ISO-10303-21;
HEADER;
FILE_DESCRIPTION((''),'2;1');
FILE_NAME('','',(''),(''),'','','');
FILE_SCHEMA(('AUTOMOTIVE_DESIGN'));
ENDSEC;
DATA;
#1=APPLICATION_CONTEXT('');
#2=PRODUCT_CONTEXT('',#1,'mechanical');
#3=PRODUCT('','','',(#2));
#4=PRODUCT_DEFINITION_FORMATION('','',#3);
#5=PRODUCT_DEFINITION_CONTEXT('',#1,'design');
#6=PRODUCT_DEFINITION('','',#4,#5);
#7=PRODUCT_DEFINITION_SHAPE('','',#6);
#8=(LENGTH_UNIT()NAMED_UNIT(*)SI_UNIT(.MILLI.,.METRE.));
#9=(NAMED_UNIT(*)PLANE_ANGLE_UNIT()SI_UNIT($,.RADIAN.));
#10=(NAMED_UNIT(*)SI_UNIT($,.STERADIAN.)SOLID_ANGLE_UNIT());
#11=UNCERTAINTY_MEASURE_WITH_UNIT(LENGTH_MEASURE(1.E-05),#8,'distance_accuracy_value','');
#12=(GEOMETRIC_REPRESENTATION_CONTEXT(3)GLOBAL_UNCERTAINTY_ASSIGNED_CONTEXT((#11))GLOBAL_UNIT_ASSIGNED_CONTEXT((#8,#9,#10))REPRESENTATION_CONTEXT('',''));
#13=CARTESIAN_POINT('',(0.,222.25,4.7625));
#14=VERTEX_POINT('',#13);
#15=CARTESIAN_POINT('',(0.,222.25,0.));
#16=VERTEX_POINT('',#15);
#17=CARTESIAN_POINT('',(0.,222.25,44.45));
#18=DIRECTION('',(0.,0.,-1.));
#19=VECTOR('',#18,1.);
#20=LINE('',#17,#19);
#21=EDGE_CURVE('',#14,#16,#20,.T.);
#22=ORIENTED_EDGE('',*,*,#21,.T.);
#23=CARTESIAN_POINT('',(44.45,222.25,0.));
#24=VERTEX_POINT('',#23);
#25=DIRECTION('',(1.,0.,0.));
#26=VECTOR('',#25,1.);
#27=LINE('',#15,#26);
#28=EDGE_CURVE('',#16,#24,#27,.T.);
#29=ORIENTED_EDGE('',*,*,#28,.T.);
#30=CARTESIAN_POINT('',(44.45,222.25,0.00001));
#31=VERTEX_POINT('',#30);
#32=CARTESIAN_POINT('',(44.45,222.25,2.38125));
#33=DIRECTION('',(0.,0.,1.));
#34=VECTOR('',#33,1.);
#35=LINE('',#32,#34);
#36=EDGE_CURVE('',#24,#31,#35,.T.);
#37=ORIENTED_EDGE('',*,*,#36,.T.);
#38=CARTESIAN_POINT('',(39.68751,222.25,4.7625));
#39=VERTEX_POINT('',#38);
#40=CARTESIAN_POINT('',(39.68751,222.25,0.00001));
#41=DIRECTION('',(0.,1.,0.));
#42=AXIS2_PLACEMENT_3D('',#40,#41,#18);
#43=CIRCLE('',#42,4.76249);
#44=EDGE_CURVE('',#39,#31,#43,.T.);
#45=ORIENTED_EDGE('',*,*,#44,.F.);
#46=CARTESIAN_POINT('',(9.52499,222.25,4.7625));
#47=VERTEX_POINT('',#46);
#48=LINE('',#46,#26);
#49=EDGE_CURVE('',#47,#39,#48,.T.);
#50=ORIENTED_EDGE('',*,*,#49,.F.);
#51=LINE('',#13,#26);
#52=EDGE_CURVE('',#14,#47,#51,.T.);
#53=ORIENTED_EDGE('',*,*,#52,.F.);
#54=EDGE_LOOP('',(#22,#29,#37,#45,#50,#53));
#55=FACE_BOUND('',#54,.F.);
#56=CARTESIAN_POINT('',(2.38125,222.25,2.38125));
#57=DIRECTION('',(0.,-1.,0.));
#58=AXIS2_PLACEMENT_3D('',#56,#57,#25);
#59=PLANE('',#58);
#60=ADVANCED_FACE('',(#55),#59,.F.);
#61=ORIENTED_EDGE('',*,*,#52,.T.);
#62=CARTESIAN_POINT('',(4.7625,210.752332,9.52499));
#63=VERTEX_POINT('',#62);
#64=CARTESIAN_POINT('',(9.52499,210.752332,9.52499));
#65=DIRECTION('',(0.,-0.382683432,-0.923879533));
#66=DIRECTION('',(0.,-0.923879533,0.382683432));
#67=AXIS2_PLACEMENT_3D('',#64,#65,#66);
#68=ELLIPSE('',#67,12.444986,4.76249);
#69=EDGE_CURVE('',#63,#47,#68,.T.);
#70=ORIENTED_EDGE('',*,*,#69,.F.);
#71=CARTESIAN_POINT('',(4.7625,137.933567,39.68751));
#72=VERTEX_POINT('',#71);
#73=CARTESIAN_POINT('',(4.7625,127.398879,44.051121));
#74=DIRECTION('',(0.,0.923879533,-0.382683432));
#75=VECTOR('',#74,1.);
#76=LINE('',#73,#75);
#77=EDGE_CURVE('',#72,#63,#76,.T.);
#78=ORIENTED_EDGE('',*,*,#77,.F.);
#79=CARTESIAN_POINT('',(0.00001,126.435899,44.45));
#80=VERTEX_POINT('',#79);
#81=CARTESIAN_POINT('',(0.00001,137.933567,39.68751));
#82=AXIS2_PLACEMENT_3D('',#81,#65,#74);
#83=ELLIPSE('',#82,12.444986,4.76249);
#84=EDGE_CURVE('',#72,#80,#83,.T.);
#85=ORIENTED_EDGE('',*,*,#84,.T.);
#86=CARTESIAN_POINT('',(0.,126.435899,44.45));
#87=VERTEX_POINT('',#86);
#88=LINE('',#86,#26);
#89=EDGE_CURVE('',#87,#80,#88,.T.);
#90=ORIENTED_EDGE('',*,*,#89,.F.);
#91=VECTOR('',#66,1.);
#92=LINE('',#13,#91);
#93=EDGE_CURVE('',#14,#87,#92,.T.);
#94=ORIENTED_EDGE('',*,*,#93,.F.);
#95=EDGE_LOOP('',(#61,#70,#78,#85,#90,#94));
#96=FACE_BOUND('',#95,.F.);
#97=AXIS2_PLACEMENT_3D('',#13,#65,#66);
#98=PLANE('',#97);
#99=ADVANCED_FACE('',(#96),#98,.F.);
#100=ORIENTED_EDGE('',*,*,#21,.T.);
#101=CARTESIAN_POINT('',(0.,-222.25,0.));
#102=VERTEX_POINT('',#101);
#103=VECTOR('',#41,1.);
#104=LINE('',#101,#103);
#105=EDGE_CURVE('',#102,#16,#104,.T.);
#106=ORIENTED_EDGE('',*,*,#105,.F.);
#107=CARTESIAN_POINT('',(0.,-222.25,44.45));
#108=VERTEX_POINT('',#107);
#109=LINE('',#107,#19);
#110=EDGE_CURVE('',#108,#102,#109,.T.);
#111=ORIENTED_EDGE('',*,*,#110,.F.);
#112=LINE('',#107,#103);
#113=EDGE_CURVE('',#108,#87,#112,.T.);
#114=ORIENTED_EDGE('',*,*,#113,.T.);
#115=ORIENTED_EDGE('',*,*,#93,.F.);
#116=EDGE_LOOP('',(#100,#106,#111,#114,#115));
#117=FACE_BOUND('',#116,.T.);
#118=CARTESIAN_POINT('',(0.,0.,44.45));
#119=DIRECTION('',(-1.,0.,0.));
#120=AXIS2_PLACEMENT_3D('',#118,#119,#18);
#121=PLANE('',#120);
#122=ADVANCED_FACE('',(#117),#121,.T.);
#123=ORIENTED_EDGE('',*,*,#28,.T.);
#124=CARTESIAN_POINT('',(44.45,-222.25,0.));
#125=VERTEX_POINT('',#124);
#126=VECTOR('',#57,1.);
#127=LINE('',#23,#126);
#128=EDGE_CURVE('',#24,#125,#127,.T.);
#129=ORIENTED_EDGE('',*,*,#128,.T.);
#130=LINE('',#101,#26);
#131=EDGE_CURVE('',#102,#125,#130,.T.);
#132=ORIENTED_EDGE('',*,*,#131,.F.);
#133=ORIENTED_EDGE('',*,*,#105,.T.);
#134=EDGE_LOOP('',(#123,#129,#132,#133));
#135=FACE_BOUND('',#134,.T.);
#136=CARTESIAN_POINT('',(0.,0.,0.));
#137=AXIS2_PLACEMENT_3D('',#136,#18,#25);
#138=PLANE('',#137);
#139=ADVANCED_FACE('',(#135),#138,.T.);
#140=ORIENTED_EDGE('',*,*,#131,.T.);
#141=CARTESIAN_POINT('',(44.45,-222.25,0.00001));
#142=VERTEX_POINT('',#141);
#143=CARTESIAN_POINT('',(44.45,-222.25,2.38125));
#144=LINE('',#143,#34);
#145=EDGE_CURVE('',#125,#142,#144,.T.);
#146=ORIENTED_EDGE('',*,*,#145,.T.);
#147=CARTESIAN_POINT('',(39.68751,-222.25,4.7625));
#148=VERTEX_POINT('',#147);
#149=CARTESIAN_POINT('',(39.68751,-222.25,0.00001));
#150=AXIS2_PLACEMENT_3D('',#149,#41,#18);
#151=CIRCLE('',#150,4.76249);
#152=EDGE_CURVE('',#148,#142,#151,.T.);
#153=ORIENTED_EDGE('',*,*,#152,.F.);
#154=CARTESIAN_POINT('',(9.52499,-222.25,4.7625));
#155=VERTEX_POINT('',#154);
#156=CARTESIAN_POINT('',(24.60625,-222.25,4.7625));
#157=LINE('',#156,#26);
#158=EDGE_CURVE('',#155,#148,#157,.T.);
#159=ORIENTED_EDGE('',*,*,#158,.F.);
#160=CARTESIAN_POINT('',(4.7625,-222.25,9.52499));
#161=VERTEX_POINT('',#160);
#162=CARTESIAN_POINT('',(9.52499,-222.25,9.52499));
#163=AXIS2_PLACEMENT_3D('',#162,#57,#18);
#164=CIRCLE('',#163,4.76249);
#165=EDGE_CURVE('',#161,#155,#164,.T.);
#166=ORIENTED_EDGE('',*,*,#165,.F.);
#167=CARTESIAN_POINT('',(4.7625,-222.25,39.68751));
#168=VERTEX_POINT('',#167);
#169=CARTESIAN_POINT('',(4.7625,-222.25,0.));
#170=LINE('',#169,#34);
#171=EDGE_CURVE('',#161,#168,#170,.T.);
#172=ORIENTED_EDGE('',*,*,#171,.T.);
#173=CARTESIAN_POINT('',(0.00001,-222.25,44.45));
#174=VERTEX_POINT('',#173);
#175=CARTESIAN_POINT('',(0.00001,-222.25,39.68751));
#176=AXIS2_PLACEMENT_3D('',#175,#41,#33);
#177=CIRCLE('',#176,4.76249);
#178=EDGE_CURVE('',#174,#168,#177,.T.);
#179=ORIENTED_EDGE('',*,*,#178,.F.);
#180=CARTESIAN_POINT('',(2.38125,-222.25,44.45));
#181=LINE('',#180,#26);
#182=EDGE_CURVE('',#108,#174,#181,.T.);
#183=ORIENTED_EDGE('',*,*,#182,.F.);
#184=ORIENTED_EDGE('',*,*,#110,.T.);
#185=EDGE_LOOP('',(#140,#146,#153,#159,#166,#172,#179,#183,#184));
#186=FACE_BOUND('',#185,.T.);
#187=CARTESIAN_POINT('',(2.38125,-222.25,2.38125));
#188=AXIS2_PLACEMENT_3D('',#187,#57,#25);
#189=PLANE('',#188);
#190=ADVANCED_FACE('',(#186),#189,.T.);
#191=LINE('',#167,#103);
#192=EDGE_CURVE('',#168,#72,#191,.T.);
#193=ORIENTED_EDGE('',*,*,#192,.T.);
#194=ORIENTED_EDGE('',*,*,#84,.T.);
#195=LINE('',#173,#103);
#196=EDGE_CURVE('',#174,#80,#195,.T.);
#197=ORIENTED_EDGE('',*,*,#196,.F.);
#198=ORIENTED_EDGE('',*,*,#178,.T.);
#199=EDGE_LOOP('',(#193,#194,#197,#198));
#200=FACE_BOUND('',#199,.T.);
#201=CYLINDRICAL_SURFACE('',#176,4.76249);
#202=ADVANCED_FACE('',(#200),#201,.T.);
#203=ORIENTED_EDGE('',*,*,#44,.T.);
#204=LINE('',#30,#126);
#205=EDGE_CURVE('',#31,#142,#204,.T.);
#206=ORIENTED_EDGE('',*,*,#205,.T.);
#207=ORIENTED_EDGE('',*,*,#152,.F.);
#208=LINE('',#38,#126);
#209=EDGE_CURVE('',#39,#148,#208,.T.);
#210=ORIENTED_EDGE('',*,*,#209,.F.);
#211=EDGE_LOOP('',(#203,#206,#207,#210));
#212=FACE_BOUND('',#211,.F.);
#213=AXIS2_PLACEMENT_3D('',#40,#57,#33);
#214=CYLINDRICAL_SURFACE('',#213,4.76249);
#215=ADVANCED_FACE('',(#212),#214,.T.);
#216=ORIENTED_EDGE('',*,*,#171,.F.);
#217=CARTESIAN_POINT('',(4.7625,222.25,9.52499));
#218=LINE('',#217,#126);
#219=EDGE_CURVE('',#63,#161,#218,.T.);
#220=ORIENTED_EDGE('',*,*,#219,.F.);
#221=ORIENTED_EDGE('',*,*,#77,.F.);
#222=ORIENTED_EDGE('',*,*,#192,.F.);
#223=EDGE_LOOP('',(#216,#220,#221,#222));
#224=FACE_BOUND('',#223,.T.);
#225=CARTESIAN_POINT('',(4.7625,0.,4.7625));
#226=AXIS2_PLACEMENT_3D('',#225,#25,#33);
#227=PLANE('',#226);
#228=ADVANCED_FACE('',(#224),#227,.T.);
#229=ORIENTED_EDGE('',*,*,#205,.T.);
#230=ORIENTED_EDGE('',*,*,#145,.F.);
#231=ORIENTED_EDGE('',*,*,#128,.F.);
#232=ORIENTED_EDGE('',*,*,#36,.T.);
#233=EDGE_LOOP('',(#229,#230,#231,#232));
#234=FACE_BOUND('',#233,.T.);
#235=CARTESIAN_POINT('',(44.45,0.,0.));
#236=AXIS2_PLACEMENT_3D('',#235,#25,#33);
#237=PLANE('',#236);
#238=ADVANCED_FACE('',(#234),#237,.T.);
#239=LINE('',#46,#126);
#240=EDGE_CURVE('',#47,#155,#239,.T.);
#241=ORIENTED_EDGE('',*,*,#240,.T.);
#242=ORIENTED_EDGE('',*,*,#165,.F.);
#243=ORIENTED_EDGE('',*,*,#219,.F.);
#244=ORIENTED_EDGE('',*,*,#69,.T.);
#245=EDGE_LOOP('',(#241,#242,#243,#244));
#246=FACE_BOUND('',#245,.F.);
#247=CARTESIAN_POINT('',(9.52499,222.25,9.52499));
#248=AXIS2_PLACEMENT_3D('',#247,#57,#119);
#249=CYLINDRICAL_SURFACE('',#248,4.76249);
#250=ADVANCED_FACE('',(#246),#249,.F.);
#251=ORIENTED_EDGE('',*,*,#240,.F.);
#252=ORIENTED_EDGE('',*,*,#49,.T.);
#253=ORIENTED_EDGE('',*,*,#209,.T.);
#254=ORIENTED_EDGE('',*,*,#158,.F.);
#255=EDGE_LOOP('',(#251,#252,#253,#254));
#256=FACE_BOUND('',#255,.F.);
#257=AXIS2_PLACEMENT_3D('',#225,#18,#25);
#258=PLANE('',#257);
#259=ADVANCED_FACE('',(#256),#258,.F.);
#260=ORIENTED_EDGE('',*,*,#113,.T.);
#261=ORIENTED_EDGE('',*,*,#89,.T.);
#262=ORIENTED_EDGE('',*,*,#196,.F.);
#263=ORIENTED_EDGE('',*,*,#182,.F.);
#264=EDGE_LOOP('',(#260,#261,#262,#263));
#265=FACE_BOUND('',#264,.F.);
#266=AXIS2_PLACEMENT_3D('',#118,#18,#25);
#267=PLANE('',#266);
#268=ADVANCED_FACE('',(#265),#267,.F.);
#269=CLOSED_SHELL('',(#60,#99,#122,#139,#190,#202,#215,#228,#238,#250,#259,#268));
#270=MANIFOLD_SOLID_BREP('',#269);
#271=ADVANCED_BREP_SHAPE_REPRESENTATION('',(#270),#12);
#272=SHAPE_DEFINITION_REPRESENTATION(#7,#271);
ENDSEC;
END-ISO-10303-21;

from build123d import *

# Parameters (mm, degrees)
F0_W     = 4.7625
F0_H     = 4.7625
F0_H_2   = 39.6875
F0_W_2   = 39.6875
F1_DEPTH = 222.25
F2_R     = 4.76249
F4_DEPTH = 25.4


# Not quite as in the source:
# - a fillet or chamfer is up to 0.001 mm smaller than in the source, because OpenCascade refuses the exact size


with BuildPart() as f1:
    # F0 (on Front) → F1 (new body, symmetric)
    with BuildSketch(Plane.XZ):
        with Locations((2.38125, 2.38125)):
            Rectangle(F0_W, F0_H)
        with Locations((2.38125, 24.60625)):
            Rectangle(F0_W, F0_H_2)
        with Locations((24.60625, 2.38125)):
            Rectangle(F0_W_2, F0_H)
    extrude(amount=F1_DEPTH, both=True)

    # F2 (radius 4.7625 in the source; OpenCascade refuses exactly that, so slightly less here)
    f2_edges = [f1.edges().sort_by_distance(p)[0] for p in [
        (4.7625, 0, 4.7625),
        (4.7625, 0, 44.45),
        (44.45, 0, 4.7625),
    ]]
    fillet(f2_edges, radius=F2_R)

    # F3 (on face) → F4 (cut)
    with BuildSketch(Plane(origin=(0, 0, 0), x_dir=(0, -1, 0), z_dir=(-1, 0, 0))):
        Polygon((-222.25, 44.45), (-222.25, 4.7625), (-126.4358992433, 44.45), align=None)
    extrude(amount=-F4_DEPTH, mode=Mode.SUBTRACT)


solid = f1.part
